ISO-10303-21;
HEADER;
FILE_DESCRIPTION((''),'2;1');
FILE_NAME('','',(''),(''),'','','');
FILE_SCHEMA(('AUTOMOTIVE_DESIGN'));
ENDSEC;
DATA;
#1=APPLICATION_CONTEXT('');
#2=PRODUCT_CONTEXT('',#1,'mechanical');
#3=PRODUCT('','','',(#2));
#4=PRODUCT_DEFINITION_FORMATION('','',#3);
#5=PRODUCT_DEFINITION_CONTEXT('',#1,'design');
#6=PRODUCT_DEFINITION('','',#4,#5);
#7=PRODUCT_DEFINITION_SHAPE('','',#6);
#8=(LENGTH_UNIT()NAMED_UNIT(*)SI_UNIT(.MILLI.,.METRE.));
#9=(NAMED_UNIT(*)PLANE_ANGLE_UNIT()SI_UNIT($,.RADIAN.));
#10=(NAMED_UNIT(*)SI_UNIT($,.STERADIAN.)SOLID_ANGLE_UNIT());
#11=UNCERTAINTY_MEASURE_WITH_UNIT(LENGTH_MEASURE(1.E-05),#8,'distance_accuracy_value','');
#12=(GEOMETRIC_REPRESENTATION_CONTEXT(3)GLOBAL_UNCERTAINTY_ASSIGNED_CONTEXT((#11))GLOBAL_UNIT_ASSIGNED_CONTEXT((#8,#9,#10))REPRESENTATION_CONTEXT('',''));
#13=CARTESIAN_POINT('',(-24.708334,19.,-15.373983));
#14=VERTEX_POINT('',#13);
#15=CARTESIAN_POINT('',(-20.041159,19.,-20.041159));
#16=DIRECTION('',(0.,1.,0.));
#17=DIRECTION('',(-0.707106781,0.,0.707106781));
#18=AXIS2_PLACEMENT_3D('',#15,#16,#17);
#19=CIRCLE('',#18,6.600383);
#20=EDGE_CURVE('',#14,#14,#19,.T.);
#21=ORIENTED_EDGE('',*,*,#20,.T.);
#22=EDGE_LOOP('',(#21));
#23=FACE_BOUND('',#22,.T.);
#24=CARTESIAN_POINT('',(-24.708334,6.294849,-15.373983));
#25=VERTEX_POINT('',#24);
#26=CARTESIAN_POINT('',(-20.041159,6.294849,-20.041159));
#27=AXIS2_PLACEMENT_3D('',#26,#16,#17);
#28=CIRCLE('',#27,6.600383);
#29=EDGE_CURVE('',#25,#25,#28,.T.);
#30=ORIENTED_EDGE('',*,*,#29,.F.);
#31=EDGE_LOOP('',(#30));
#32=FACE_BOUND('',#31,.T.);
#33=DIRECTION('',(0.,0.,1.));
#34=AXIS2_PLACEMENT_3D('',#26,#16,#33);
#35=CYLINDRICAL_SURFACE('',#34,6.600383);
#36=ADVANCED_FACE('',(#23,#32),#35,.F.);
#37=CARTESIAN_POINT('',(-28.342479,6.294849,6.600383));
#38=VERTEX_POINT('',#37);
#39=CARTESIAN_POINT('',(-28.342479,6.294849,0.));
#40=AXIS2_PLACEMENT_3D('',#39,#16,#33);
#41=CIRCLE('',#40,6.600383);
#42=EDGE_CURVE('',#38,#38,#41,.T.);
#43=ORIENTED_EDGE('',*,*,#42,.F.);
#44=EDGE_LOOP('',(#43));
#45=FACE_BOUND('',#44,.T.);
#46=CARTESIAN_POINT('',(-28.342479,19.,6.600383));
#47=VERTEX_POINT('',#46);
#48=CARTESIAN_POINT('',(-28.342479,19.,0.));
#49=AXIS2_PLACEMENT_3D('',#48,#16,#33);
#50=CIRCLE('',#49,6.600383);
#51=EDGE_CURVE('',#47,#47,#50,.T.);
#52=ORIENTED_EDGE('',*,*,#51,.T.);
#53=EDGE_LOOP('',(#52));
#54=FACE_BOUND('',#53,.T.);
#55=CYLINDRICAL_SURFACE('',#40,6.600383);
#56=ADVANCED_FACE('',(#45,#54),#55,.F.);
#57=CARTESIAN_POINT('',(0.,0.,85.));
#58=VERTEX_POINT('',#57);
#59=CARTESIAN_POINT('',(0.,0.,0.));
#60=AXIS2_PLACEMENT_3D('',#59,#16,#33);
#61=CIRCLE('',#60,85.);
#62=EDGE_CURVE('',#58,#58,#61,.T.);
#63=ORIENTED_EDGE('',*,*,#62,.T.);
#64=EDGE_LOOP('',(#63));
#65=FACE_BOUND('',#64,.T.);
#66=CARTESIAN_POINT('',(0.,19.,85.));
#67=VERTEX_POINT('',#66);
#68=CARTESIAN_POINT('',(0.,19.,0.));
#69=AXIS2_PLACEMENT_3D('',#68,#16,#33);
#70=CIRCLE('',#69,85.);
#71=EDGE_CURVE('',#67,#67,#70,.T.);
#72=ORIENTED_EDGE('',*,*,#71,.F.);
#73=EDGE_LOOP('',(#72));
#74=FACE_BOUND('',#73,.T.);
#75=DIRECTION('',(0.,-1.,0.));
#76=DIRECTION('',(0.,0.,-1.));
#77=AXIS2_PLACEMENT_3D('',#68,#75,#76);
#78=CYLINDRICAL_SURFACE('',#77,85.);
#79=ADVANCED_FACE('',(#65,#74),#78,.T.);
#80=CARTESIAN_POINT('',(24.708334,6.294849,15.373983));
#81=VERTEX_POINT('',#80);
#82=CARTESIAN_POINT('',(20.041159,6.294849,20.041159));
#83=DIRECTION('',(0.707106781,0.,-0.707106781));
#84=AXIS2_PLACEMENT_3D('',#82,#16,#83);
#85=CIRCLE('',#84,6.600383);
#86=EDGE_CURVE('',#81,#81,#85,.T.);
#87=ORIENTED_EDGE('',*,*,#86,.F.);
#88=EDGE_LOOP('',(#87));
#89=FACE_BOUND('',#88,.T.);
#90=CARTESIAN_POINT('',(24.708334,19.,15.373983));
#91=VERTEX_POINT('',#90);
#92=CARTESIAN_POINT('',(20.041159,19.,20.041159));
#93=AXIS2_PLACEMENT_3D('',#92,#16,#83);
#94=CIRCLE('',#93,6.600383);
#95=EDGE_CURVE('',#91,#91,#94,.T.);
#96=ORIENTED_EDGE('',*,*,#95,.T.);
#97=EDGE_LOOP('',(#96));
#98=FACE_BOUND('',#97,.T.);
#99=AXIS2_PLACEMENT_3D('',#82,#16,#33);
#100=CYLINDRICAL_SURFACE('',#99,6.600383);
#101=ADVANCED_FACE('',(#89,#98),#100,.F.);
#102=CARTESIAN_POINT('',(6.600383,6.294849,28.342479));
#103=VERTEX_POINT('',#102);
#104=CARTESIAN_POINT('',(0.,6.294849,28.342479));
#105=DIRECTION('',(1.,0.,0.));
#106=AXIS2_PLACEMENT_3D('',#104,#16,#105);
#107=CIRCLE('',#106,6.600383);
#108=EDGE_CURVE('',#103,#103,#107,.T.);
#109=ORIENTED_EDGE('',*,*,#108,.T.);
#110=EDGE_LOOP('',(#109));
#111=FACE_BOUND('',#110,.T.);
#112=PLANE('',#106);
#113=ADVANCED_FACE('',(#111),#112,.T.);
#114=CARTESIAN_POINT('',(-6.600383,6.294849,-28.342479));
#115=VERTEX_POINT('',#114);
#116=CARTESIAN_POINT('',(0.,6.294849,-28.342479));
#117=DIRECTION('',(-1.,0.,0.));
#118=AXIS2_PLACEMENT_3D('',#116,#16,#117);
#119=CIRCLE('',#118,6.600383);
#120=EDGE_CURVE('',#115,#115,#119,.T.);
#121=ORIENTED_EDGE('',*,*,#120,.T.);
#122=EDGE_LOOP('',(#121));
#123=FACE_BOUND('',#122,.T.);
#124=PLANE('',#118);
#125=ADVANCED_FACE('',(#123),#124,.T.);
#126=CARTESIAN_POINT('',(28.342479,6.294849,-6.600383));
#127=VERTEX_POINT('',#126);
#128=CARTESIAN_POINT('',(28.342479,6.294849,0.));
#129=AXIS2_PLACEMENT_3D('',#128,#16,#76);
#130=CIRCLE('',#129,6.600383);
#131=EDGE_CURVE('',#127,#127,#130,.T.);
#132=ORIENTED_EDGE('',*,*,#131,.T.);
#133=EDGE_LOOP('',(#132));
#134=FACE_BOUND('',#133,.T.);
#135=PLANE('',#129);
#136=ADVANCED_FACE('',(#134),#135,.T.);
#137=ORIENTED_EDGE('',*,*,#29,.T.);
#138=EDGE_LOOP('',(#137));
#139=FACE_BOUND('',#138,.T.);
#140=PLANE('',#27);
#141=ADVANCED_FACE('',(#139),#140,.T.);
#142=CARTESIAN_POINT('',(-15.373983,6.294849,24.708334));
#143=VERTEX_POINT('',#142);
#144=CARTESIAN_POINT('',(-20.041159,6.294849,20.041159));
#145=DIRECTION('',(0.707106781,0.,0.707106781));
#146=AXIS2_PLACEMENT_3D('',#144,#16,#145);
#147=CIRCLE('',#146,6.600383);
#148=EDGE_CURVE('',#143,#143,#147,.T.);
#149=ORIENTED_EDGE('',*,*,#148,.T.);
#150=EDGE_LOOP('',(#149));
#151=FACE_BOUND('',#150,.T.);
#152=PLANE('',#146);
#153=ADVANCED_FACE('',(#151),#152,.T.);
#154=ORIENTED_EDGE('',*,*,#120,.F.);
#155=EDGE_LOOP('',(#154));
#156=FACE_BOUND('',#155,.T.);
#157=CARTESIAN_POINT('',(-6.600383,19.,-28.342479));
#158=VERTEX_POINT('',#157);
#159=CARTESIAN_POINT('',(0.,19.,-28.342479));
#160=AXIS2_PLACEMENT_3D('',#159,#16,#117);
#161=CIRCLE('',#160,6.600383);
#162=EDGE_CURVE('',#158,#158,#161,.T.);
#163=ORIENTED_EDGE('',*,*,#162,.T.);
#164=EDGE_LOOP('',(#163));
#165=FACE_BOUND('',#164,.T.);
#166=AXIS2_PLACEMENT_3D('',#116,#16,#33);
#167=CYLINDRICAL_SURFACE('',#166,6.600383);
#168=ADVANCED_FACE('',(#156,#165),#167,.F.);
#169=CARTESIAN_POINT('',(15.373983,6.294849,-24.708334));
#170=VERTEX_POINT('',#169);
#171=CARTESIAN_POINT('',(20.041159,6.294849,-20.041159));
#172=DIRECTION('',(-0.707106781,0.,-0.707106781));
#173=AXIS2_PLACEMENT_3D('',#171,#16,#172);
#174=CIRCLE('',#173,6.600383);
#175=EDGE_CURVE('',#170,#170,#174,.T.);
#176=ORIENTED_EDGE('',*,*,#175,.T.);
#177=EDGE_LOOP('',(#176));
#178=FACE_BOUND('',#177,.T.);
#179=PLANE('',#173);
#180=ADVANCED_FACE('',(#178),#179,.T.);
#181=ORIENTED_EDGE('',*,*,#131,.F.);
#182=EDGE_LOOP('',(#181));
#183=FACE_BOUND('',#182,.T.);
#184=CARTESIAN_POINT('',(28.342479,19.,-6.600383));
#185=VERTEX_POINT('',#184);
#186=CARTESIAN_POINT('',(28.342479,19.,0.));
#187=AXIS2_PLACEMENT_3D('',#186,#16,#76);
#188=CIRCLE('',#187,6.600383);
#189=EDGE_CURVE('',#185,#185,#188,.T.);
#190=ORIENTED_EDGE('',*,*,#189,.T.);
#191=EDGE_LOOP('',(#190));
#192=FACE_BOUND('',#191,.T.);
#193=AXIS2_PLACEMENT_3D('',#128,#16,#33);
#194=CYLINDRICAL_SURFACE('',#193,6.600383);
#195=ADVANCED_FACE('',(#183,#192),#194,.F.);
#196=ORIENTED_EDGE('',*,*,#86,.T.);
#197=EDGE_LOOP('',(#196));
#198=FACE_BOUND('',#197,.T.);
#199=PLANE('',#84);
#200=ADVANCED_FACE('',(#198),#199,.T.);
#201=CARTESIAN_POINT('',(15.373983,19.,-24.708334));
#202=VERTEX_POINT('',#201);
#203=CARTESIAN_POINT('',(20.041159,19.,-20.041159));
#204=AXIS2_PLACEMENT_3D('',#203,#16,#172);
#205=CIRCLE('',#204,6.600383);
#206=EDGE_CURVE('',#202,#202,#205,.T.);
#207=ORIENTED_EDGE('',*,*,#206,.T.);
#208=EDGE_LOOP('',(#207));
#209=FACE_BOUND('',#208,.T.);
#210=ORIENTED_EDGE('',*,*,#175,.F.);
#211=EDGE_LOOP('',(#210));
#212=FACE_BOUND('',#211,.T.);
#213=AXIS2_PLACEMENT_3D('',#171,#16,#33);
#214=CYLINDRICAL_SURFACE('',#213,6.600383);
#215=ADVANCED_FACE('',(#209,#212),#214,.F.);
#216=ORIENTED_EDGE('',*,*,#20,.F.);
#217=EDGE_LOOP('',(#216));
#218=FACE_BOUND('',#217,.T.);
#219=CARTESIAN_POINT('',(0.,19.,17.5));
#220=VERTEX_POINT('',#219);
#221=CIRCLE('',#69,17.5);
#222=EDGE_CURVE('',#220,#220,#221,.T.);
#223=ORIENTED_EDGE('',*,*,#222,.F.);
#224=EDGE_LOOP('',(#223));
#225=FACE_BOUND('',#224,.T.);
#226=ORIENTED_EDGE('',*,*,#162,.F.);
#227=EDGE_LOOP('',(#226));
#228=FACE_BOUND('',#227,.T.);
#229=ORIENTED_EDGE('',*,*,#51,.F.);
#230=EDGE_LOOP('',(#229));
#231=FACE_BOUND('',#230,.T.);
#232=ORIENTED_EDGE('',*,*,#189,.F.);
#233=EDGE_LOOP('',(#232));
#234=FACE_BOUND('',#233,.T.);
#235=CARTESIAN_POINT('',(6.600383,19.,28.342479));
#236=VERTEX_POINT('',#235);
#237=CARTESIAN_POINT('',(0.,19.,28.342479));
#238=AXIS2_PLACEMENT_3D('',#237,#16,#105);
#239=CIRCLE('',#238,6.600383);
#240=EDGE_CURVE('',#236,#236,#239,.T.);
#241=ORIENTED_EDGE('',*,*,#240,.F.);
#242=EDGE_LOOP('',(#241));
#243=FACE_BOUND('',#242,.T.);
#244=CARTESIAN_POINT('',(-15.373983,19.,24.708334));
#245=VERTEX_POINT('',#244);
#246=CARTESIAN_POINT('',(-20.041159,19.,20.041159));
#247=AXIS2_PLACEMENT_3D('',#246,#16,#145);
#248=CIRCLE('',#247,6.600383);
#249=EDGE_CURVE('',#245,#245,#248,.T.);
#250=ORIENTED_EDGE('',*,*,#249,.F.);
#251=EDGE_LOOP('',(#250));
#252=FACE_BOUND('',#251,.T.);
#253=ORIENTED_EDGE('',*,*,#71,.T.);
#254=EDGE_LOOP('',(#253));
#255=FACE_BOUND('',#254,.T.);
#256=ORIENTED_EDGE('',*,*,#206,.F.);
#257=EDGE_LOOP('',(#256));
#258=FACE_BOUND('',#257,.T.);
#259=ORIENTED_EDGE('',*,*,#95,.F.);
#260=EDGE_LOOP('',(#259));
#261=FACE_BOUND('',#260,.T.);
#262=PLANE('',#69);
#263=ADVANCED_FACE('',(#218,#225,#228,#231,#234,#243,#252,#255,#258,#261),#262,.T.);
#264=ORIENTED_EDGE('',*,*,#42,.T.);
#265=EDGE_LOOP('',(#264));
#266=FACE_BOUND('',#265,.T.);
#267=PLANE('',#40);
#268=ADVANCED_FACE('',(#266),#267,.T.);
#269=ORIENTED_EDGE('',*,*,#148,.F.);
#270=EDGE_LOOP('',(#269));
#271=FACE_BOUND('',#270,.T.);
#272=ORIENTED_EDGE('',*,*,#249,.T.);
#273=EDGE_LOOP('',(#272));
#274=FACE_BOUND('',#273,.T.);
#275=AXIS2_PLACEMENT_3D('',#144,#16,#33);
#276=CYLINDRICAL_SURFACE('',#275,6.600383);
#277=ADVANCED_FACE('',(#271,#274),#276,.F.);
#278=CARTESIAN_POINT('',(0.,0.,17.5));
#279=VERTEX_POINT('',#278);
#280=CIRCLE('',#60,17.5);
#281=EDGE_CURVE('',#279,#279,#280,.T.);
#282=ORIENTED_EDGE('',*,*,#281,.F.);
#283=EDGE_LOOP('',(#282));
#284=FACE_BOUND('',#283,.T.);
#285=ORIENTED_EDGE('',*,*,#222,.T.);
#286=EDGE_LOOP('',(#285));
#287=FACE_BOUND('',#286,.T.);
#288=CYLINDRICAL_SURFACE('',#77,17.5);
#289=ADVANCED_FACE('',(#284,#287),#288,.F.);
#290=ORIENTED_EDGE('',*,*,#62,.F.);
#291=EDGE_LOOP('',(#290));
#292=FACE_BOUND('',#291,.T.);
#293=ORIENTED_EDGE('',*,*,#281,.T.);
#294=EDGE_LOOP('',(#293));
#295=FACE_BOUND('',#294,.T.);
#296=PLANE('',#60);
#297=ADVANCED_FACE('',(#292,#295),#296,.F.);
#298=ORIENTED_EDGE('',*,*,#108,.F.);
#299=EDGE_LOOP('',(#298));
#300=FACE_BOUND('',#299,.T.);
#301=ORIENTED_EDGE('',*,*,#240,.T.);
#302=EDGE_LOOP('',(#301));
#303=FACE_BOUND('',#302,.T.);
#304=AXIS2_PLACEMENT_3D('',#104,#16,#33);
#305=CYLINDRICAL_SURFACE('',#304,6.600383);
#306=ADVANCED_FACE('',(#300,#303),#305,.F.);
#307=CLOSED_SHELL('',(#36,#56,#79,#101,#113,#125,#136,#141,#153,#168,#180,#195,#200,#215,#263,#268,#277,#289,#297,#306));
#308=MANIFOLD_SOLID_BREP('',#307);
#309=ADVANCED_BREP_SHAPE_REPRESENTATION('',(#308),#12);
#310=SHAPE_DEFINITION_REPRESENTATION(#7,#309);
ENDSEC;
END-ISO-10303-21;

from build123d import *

# Parameters (mm, degrees)
SKETCH1_R           = 85
BOSS_EXTRUDE1_DEPTH = 19
SKETCH2_R           = 17.5
CUT_EXTRUDE1_DEPTH  = 122.70045193
SKETCH3_R           = 6.600383074
CUT_EXTRUDE2_DEPTH  = 12.705151312
CIRPATTERN1_COUNT   = 8


with BuildPart() as part:
    # Sketch1 → Boss-Extrude1 (new body)
    with BuildSketch(Plane(origin=(0, 0, 0), x_dir=(1, 0, 0), z_dir=(0, 1, 0))):
        Circle(SKETCH1_R)
    extrude(amount=BOSS_EXTRUDE1_DEPTH)

    # Sketch2 → Cut-Extrude1 (cut, through all)
    with BuildSketch(Plane(origin=(0, 0, 0), x_dir=(1, 0, 0), z_dir=(0, 1, 0))):
        Circle(SKETCH2_R)
    extrude(amount=CUT_EXTRUDE1_DEPTH, mode=Mode.SUBTRACT)

    # Sketch3 → Cut-Extrude2 (cut)
    with BuildSketch(Plane(origin=(0, 19, 0), x_dir=(1, 0, 0), z_dir=(0, 1, 0))):
        with Locations((-28.342478597, 0)):
            Circle(SKETCH3_R)
    cut_extrude2 = extrude(amount=-CUT_EXTRUDE2_DEPTH, mode=Mode.SUBTRACT)

    # CirPattern1: Cut-Extrude2 ×8 about axis
    cirpattern1_axis = Axis((0, 0, 0), (0, 1, 0))
    for i in range(1, CIRPATTERN1_COUNT):
        add(cut_extrude2.rotate(cirpattern1_axis, i * 360 / CIRPATTERN1_COUNT), mode=Mode.SUBTRACT)


solid = part.part
